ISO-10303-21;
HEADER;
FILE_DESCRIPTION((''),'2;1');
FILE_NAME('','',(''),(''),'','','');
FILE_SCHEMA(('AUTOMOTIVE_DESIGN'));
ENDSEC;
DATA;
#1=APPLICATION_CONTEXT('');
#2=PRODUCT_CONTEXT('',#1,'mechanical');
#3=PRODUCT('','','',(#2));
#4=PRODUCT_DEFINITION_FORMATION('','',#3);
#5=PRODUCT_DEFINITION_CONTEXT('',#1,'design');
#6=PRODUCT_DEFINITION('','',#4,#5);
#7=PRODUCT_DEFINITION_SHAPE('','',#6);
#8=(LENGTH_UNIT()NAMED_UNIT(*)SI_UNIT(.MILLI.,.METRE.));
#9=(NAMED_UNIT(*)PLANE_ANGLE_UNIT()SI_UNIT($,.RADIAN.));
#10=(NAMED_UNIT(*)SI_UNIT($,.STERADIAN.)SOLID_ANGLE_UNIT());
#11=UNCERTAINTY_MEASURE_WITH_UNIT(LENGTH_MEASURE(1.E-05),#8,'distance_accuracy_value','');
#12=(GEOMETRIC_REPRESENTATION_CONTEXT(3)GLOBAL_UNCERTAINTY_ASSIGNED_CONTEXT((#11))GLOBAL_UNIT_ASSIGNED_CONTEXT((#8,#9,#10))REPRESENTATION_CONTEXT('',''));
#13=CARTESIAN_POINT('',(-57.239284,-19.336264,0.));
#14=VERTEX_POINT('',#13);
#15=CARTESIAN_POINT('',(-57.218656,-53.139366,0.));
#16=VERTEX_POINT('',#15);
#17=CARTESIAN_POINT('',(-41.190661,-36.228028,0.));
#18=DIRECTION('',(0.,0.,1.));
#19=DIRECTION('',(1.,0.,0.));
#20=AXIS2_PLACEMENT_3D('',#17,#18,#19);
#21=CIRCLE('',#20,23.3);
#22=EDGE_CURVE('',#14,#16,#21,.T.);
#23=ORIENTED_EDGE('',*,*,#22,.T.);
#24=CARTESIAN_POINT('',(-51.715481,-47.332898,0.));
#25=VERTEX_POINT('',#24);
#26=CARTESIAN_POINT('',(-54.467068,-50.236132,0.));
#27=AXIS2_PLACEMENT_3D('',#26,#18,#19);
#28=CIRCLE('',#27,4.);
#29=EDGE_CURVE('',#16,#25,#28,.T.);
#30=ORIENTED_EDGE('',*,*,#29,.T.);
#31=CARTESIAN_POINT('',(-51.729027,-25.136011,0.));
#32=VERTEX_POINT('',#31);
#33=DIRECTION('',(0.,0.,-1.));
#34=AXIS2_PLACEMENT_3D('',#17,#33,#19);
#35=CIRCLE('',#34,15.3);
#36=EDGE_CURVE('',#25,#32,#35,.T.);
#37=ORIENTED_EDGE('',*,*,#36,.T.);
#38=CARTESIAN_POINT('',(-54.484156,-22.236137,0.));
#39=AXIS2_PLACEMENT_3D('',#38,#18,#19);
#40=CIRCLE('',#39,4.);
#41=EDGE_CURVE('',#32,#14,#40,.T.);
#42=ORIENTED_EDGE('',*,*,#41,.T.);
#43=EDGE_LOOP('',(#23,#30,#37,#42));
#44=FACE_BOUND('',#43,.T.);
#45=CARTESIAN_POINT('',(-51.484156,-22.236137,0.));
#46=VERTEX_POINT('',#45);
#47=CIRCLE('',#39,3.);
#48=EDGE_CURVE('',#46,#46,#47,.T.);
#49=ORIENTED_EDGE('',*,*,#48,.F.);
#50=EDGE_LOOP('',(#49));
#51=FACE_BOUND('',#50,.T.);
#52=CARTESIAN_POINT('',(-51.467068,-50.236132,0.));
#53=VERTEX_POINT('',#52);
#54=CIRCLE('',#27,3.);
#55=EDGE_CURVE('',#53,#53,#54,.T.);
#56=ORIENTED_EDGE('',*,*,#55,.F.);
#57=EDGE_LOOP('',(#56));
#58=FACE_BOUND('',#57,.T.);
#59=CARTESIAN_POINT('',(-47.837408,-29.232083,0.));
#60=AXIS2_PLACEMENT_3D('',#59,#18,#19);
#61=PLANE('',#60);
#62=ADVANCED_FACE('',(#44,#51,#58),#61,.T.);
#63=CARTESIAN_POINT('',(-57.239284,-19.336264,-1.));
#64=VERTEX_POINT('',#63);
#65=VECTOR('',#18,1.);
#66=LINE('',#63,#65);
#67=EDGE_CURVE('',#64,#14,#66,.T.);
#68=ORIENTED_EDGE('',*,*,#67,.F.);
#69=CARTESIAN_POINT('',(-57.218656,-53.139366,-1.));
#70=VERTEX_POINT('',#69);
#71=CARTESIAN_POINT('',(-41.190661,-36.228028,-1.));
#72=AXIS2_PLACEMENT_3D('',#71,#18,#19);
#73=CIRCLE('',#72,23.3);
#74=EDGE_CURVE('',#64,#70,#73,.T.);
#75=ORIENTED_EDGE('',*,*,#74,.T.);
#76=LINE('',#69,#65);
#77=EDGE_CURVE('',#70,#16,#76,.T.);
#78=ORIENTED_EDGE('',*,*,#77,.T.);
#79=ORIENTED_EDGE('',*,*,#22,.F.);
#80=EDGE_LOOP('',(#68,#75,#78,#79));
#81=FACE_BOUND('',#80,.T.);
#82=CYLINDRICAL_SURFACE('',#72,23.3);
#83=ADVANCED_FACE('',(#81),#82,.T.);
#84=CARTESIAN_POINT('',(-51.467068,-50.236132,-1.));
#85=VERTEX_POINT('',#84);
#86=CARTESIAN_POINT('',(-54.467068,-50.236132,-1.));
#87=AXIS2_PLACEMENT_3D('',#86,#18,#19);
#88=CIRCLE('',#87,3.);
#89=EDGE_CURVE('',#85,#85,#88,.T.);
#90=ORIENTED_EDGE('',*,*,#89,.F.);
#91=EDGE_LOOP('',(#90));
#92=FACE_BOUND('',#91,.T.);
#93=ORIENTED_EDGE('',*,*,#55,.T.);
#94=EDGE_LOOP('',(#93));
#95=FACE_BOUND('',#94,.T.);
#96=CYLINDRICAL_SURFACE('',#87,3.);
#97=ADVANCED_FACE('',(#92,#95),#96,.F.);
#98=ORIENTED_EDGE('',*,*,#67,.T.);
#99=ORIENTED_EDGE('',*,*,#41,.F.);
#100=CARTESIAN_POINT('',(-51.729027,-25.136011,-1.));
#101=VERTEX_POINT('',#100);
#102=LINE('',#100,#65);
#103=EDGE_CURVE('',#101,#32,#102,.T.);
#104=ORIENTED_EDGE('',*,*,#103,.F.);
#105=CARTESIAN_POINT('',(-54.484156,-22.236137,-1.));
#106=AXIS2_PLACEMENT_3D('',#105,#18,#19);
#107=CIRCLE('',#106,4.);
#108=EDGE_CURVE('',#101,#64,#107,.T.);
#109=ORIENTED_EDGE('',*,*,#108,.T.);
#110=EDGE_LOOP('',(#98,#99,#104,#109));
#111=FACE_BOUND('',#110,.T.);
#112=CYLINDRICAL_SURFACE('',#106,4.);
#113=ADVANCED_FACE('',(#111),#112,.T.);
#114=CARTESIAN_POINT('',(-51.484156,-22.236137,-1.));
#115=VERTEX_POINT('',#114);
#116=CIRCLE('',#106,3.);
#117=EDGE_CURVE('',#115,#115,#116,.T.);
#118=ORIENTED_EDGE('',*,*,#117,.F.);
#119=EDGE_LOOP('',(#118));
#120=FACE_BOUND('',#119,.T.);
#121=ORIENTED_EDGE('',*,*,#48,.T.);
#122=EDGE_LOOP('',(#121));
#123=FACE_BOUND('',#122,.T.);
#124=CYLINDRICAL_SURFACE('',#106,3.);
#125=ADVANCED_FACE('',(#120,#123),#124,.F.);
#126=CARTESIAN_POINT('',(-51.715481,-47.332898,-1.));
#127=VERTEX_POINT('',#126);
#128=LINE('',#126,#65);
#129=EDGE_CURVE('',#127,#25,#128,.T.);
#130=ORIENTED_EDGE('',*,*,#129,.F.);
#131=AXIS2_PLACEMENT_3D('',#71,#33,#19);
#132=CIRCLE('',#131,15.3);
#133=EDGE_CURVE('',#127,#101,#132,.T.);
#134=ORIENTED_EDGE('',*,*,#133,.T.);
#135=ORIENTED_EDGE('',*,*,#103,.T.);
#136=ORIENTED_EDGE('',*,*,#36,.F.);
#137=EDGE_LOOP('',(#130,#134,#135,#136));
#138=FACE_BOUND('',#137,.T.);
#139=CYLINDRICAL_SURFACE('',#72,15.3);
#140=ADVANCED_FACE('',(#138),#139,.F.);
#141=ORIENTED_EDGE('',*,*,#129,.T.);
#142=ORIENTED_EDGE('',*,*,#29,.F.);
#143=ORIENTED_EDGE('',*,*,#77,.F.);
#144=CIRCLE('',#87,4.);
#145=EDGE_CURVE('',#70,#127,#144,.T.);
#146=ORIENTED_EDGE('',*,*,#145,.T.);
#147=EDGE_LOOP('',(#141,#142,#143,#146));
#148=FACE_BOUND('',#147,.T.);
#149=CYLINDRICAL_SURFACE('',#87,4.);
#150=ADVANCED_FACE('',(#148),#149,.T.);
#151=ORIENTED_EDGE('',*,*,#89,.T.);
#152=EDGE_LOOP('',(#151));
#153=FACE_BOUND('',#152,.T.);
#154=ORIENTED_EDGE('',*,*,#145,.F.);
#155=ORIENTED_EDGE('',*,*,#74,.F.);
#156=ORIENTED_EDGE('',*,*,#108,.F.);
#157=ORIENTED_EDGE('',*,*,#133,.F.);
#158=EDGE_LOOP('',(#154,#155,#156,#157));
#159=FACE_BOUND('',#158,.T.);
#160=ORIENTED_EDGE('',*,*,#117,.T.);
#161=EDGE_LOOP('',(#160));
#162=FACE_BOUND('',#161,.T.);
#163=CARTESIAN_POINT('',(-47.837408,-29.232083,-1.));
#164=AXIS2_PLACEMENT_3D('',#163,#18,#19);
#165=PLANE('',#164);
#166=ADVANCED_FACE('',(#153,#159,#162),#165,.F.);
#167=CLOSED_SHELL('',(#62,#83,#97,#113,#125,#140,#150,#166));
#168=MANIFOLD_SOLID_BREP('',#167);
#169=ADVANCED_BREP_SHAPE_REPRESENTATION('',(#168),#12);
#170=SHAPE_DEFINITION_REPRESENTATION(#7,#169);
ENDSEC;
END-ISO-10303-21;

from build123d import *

# Parameters (mm, degrees)
ESQUISSE1_R               = 3
T_LE_DE_BASE_PLI_E1_DEPTH = 1


# Sheet-metal steps are written as plain solids
with BuildPart() as part:
    # Esquisse1 → Tôle de base pliée1 (new body)
    with BuildSketch(Plane.XY):
        with BuildLine():
            ThreePointArc((-57.239284083, -19.336263861), (-64.490656247, -36.242246604), (-57.218655547, -53.139366375))
            ThreePointArc((-57.218655547, -53.139366375), (-51.563834313, -52.987719377), (-51.715481312, -47.332898143))
            ThreePointArc((-51.715481312, -47.332898143), (-56.490657737, -36.237364559), (-51.729027089, -25.136011084))
            ThreePointArc((-51.729027089, -25.136011084), (-51.584281974, -19.481008975), (-57.239284083, -19.336263861))
        make_face()
        with Locations((-54.484155586, -22.236137473)):
            Circle(ESQUISSE1_R, mode=Mode.SUBTRACT)
        with Locations((-54.467068429, -50.236132259)):
            Circle(ESQUISSE1_R, mode=Mode.SUBTRACT)
    extrude(amount=-T_LE_DE_BASE_PLI_E1_DEPTH)


solid = part.part
